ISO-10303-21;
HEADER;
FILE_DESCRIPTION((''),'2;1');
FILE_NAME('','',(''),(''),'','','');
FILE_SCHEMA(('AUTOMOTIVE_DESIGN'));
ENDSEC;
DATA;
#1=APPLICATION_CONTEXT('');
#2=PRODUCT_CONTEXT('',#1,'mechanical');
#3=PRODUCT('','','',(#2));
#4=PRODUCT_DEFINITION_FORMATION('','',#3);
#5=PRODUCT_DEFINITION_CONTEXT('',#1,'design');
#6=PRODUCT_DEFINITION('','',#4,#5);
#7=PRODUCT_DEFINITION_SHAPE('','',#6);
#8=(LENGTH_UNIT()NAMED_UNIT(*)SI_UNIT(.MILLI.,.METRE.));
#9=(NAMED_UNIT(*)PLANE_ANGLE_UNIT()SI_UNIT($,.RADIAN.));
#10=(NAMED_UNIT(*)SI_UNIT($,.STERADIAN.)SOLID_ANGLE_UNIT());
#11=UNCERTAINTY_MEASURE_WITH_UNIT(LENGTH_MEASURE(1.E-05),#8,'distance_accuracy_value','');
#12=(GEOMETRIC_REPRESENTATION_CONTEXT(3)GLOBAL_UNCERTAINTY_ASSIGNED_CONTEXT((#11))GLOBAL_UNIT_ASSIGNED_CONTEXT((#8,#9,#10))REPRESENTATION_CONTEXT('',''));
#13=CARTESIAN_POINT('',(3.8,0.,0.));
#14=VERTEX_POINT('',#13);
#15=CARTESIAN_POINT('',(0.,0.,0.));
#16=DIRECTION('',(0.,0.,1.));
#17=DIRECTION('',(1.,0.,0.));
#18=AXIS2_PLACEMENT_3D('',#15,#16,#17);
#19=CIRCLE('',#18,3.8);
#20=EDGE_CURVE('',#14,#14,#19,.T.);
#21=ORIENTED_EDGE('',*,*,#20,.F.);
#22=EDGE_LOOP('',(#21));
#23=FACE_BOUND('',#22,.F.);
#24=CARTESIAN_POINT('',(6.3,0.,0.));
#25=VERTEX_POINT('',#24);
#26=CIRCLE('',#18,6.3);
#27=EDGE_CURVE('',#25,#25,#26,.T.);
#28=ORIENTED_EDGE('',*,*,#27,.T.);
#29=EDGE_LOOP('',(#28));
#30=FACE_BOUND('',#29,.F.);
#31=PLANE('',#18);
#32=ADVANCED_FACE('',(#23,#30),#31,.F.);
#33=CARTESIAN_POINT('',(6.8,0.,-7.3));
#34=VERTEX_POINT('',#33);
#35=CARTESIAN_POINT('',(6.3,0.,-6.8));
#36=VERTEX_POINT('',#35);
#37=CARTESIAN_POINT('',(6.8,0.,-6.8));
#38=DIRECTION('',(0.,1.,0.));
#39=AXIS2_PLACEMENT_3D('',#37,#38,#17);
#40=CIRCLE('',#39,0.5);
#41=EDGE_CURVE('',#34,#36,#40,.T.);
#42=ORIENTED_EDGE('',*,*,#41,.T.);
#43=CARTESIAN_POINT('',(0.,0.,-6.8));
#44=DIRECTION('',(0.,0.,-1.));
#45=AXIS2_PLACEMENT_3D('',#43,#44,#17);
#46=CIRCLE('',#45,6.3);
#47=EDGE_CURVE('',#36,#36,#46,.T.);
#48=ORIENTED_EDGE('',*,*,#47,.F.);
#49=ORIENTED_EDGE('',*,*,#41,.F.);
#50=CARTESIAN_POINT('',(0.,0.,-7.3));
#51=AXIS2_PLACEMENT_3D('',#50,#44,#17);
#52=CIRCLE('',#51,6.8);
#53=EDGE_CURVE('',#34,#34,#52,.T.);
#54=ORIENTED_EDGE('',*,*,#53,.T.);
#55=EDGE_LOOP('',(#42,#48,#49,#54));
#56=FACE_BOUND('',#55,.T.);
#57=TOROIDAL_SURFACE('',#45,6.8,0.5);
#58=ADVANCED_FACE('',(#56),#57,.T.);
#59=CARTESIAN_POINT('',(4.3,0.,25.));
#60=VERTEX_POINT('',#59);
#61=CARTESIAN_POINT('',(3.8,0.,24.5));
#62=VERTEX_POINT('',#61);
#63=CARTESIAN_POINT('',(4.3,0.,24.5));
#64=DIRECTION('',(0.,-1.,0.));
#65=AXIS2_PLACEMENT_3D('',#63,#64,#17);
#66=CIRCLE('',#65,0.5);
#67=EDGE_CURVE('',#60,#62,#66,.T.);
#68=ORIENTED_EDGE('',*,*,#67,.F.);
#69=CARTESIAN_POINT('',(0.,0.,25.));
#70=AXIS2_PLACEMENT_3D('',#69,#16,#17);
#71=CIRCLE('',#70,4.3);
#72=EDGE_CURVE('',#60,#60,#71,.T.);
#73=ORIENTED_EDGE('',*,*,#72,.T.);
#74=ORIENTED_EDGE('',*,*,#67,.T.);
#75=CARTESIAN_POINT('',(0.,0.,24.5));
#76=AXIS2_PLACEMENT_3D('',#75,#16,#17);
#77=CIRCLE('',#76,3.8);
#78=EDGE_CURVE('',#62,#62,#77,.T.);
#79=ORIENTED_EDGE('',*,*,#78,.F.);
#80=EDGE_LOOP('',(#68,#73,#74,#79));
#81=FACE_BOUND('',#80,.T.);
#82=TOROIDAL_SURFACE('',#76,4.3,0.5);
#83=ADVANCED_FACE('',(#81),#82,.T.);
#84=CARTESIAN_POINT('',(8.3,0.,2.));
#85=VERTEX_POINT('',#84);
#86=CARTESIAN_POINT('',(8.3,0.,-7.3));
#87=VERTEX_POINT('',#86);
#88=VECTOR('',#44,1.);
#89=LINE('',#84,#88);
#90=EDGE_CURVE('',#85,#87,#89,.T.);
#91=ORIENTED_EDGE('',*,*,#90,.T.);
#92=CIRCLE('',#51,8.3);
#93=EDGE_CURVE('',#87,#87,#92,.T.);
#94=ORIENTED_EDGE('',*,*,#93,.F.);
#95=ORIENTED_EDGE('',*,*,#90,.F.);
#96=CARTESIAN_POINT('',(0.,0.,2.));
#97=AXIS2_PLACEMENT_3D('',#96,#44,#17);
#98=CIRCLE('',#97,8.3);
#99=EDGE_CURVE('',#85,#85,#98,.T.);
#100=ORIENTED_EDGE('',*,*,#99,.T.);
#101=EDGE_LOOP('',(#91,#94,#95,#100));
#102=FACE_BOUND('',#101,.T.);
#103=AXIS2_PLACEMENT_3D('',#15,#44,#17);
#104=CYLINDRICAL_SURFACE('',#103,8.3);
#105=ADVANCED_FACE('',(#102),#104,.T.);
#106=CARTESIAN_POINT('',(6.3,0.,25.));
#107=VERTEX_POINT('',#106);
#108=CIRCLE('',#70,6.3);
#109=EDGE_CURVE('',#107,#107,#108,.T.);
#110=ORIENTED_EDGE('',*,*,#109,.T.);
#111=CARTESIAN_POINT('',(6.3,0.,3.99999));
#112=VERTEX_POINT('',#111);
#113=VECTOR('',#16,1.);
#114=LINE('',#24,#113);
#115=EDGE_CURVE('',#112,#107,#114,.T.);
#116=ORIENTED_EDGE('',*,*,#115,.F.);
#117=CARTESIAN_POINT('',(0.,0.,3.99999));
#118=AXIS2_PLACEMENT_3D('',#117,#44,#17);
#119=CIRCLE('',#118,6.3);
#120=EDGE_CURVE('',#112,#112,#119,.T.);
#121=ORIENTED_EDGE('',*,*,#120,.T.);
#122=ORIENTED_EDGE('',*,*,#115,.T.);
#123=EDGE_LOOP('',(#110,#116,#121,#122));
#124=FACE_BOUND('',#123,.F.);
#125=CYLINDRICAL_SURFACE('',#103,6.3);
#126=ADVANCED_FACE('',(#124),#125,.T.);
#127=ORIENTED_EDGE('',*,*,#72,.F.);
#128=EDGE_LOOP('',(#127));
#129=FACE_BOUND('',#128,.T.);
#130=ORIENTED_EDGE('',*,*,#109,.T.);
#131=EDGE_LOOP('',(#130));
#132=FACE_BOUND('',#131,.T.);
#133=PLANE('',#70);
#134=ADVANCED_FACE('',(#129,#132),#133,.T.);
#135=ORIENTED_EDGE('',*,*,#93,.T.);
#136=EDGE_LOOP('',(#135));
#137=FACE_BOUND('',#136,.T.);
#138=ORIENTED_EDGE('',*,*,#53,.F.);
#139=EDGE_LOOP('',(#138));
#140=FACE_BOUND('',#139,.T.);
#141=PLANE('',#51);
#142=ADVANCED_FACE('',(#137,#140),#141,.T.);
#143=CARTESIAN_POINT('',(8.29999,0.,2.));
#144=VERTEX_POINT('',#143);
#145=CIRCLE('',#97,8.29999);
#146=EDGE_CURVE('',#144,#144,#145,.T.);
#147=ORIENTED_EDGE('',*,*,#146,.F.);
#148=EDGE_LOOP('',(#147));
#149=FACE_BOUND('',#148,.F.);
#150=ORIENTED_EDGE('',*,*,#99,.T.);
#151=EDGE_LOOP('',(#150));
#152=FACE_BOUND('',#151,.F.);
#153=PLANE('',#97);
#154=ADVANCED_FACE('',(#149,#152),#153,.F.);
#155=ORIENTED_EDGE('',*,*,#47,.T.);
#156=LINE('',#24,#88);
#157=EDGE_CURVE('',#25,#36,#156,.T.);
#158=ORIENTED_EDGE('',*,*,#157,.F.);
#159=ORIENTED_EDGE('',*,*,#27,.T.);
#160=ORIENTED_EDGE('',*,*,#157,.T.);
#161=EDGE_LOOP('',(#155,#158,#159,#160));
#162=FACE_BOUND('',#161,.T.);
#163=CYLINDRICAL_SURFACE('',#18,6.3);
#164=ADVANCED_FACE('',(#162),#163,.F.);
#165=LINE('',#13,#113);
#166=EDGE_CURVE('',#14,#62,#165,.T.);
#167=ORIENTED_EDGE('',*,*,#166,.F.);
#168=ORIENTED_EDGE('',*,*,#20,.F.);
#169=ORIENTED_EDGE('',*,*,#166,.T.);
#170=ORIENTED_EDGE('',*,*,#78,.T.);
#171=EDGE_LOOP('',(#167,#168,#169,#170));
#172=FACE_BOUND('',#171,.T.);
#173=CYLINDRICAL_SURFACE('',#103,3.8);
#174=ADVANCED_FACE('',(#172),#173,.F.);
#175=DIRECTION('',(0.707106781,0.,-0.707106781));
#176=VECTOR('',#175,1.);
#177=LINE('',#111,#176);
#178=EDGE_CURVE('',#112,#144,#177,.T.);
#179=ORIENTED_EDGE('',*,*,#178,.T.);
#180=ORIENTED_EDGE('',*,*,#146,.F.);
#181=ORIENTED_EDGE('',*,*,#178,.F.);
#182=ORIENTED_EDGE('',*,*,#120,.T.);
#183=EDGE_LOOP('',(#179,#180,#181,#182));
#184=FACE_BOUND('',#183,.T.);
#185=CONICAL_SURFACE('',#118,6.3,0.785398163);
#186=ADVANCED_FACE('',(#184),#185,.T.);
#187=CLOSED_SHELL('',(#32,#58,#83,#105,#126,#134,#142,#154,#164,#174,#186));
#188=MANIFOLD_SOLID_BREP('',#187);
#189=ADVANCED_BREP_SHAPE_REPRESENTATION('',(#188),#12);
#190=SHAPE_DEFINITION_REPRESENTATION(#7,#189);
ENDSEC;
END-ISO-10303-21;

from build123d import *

# Parameters (mm, degrees)
F0_R          = 6.3
F0_R_2        = 3.8
F1_DEPTH      = 25
F2_R          = 8.3
F2_R_2        = 6.3
F3_DEPTH      = 7.3
F3_DEPTH_BACK = 2
F4_SIZE       = 1.99999
F5_R          = 0.5


# Not quite as in the source:
# - a fillet or chamfer is up to 0.001 mm smaller than in the source, because OpenCascade refuses the exact size


with BuildPart() as f1:
    # F0 (on Top) → F1 (new body)
    with BuildSketch(Plane.XY):
        Circle(F0_R)
        Circle(F0_R_2, mode=Mode.SUBTRACT)
    extrude(amount=F1_DEPTH)

    # F2 (on face) → F3 (join, two sides)
    with BuildSketch(Plane(origin=(0, 0, 0), x_dir=(1, 0, 0), z_dir=(0, 0, -1))) as f3_sk:
        Circle(F2_R)
        Circle(F2_R_2, mode=Mode.SUBTRACT)
    extrude(amount=F3_DEPTH)
    extrude(f3_sk.sketch, amount=-F3_DEPTH_BACK)

    # F4 (size 2 in the source; OpenCascade refuses exactly that, so slightly less here)
    f4_edges = [f1.edges().sort_by_distance(p)[0] for p in [
        (-6.3, 0, 2),
    ]]
    chamfer(f4_edges, length=F4_SIZE)

    # F5
    f5_edges = [f1.edges().sort_by_distance(p)[0] for p in [
        (-3.8, 0, 25),
        (-6.3, 0, -7.3),
    ]]
    fillet(f5_edges, radius=F5_R)


solid = f1.part
